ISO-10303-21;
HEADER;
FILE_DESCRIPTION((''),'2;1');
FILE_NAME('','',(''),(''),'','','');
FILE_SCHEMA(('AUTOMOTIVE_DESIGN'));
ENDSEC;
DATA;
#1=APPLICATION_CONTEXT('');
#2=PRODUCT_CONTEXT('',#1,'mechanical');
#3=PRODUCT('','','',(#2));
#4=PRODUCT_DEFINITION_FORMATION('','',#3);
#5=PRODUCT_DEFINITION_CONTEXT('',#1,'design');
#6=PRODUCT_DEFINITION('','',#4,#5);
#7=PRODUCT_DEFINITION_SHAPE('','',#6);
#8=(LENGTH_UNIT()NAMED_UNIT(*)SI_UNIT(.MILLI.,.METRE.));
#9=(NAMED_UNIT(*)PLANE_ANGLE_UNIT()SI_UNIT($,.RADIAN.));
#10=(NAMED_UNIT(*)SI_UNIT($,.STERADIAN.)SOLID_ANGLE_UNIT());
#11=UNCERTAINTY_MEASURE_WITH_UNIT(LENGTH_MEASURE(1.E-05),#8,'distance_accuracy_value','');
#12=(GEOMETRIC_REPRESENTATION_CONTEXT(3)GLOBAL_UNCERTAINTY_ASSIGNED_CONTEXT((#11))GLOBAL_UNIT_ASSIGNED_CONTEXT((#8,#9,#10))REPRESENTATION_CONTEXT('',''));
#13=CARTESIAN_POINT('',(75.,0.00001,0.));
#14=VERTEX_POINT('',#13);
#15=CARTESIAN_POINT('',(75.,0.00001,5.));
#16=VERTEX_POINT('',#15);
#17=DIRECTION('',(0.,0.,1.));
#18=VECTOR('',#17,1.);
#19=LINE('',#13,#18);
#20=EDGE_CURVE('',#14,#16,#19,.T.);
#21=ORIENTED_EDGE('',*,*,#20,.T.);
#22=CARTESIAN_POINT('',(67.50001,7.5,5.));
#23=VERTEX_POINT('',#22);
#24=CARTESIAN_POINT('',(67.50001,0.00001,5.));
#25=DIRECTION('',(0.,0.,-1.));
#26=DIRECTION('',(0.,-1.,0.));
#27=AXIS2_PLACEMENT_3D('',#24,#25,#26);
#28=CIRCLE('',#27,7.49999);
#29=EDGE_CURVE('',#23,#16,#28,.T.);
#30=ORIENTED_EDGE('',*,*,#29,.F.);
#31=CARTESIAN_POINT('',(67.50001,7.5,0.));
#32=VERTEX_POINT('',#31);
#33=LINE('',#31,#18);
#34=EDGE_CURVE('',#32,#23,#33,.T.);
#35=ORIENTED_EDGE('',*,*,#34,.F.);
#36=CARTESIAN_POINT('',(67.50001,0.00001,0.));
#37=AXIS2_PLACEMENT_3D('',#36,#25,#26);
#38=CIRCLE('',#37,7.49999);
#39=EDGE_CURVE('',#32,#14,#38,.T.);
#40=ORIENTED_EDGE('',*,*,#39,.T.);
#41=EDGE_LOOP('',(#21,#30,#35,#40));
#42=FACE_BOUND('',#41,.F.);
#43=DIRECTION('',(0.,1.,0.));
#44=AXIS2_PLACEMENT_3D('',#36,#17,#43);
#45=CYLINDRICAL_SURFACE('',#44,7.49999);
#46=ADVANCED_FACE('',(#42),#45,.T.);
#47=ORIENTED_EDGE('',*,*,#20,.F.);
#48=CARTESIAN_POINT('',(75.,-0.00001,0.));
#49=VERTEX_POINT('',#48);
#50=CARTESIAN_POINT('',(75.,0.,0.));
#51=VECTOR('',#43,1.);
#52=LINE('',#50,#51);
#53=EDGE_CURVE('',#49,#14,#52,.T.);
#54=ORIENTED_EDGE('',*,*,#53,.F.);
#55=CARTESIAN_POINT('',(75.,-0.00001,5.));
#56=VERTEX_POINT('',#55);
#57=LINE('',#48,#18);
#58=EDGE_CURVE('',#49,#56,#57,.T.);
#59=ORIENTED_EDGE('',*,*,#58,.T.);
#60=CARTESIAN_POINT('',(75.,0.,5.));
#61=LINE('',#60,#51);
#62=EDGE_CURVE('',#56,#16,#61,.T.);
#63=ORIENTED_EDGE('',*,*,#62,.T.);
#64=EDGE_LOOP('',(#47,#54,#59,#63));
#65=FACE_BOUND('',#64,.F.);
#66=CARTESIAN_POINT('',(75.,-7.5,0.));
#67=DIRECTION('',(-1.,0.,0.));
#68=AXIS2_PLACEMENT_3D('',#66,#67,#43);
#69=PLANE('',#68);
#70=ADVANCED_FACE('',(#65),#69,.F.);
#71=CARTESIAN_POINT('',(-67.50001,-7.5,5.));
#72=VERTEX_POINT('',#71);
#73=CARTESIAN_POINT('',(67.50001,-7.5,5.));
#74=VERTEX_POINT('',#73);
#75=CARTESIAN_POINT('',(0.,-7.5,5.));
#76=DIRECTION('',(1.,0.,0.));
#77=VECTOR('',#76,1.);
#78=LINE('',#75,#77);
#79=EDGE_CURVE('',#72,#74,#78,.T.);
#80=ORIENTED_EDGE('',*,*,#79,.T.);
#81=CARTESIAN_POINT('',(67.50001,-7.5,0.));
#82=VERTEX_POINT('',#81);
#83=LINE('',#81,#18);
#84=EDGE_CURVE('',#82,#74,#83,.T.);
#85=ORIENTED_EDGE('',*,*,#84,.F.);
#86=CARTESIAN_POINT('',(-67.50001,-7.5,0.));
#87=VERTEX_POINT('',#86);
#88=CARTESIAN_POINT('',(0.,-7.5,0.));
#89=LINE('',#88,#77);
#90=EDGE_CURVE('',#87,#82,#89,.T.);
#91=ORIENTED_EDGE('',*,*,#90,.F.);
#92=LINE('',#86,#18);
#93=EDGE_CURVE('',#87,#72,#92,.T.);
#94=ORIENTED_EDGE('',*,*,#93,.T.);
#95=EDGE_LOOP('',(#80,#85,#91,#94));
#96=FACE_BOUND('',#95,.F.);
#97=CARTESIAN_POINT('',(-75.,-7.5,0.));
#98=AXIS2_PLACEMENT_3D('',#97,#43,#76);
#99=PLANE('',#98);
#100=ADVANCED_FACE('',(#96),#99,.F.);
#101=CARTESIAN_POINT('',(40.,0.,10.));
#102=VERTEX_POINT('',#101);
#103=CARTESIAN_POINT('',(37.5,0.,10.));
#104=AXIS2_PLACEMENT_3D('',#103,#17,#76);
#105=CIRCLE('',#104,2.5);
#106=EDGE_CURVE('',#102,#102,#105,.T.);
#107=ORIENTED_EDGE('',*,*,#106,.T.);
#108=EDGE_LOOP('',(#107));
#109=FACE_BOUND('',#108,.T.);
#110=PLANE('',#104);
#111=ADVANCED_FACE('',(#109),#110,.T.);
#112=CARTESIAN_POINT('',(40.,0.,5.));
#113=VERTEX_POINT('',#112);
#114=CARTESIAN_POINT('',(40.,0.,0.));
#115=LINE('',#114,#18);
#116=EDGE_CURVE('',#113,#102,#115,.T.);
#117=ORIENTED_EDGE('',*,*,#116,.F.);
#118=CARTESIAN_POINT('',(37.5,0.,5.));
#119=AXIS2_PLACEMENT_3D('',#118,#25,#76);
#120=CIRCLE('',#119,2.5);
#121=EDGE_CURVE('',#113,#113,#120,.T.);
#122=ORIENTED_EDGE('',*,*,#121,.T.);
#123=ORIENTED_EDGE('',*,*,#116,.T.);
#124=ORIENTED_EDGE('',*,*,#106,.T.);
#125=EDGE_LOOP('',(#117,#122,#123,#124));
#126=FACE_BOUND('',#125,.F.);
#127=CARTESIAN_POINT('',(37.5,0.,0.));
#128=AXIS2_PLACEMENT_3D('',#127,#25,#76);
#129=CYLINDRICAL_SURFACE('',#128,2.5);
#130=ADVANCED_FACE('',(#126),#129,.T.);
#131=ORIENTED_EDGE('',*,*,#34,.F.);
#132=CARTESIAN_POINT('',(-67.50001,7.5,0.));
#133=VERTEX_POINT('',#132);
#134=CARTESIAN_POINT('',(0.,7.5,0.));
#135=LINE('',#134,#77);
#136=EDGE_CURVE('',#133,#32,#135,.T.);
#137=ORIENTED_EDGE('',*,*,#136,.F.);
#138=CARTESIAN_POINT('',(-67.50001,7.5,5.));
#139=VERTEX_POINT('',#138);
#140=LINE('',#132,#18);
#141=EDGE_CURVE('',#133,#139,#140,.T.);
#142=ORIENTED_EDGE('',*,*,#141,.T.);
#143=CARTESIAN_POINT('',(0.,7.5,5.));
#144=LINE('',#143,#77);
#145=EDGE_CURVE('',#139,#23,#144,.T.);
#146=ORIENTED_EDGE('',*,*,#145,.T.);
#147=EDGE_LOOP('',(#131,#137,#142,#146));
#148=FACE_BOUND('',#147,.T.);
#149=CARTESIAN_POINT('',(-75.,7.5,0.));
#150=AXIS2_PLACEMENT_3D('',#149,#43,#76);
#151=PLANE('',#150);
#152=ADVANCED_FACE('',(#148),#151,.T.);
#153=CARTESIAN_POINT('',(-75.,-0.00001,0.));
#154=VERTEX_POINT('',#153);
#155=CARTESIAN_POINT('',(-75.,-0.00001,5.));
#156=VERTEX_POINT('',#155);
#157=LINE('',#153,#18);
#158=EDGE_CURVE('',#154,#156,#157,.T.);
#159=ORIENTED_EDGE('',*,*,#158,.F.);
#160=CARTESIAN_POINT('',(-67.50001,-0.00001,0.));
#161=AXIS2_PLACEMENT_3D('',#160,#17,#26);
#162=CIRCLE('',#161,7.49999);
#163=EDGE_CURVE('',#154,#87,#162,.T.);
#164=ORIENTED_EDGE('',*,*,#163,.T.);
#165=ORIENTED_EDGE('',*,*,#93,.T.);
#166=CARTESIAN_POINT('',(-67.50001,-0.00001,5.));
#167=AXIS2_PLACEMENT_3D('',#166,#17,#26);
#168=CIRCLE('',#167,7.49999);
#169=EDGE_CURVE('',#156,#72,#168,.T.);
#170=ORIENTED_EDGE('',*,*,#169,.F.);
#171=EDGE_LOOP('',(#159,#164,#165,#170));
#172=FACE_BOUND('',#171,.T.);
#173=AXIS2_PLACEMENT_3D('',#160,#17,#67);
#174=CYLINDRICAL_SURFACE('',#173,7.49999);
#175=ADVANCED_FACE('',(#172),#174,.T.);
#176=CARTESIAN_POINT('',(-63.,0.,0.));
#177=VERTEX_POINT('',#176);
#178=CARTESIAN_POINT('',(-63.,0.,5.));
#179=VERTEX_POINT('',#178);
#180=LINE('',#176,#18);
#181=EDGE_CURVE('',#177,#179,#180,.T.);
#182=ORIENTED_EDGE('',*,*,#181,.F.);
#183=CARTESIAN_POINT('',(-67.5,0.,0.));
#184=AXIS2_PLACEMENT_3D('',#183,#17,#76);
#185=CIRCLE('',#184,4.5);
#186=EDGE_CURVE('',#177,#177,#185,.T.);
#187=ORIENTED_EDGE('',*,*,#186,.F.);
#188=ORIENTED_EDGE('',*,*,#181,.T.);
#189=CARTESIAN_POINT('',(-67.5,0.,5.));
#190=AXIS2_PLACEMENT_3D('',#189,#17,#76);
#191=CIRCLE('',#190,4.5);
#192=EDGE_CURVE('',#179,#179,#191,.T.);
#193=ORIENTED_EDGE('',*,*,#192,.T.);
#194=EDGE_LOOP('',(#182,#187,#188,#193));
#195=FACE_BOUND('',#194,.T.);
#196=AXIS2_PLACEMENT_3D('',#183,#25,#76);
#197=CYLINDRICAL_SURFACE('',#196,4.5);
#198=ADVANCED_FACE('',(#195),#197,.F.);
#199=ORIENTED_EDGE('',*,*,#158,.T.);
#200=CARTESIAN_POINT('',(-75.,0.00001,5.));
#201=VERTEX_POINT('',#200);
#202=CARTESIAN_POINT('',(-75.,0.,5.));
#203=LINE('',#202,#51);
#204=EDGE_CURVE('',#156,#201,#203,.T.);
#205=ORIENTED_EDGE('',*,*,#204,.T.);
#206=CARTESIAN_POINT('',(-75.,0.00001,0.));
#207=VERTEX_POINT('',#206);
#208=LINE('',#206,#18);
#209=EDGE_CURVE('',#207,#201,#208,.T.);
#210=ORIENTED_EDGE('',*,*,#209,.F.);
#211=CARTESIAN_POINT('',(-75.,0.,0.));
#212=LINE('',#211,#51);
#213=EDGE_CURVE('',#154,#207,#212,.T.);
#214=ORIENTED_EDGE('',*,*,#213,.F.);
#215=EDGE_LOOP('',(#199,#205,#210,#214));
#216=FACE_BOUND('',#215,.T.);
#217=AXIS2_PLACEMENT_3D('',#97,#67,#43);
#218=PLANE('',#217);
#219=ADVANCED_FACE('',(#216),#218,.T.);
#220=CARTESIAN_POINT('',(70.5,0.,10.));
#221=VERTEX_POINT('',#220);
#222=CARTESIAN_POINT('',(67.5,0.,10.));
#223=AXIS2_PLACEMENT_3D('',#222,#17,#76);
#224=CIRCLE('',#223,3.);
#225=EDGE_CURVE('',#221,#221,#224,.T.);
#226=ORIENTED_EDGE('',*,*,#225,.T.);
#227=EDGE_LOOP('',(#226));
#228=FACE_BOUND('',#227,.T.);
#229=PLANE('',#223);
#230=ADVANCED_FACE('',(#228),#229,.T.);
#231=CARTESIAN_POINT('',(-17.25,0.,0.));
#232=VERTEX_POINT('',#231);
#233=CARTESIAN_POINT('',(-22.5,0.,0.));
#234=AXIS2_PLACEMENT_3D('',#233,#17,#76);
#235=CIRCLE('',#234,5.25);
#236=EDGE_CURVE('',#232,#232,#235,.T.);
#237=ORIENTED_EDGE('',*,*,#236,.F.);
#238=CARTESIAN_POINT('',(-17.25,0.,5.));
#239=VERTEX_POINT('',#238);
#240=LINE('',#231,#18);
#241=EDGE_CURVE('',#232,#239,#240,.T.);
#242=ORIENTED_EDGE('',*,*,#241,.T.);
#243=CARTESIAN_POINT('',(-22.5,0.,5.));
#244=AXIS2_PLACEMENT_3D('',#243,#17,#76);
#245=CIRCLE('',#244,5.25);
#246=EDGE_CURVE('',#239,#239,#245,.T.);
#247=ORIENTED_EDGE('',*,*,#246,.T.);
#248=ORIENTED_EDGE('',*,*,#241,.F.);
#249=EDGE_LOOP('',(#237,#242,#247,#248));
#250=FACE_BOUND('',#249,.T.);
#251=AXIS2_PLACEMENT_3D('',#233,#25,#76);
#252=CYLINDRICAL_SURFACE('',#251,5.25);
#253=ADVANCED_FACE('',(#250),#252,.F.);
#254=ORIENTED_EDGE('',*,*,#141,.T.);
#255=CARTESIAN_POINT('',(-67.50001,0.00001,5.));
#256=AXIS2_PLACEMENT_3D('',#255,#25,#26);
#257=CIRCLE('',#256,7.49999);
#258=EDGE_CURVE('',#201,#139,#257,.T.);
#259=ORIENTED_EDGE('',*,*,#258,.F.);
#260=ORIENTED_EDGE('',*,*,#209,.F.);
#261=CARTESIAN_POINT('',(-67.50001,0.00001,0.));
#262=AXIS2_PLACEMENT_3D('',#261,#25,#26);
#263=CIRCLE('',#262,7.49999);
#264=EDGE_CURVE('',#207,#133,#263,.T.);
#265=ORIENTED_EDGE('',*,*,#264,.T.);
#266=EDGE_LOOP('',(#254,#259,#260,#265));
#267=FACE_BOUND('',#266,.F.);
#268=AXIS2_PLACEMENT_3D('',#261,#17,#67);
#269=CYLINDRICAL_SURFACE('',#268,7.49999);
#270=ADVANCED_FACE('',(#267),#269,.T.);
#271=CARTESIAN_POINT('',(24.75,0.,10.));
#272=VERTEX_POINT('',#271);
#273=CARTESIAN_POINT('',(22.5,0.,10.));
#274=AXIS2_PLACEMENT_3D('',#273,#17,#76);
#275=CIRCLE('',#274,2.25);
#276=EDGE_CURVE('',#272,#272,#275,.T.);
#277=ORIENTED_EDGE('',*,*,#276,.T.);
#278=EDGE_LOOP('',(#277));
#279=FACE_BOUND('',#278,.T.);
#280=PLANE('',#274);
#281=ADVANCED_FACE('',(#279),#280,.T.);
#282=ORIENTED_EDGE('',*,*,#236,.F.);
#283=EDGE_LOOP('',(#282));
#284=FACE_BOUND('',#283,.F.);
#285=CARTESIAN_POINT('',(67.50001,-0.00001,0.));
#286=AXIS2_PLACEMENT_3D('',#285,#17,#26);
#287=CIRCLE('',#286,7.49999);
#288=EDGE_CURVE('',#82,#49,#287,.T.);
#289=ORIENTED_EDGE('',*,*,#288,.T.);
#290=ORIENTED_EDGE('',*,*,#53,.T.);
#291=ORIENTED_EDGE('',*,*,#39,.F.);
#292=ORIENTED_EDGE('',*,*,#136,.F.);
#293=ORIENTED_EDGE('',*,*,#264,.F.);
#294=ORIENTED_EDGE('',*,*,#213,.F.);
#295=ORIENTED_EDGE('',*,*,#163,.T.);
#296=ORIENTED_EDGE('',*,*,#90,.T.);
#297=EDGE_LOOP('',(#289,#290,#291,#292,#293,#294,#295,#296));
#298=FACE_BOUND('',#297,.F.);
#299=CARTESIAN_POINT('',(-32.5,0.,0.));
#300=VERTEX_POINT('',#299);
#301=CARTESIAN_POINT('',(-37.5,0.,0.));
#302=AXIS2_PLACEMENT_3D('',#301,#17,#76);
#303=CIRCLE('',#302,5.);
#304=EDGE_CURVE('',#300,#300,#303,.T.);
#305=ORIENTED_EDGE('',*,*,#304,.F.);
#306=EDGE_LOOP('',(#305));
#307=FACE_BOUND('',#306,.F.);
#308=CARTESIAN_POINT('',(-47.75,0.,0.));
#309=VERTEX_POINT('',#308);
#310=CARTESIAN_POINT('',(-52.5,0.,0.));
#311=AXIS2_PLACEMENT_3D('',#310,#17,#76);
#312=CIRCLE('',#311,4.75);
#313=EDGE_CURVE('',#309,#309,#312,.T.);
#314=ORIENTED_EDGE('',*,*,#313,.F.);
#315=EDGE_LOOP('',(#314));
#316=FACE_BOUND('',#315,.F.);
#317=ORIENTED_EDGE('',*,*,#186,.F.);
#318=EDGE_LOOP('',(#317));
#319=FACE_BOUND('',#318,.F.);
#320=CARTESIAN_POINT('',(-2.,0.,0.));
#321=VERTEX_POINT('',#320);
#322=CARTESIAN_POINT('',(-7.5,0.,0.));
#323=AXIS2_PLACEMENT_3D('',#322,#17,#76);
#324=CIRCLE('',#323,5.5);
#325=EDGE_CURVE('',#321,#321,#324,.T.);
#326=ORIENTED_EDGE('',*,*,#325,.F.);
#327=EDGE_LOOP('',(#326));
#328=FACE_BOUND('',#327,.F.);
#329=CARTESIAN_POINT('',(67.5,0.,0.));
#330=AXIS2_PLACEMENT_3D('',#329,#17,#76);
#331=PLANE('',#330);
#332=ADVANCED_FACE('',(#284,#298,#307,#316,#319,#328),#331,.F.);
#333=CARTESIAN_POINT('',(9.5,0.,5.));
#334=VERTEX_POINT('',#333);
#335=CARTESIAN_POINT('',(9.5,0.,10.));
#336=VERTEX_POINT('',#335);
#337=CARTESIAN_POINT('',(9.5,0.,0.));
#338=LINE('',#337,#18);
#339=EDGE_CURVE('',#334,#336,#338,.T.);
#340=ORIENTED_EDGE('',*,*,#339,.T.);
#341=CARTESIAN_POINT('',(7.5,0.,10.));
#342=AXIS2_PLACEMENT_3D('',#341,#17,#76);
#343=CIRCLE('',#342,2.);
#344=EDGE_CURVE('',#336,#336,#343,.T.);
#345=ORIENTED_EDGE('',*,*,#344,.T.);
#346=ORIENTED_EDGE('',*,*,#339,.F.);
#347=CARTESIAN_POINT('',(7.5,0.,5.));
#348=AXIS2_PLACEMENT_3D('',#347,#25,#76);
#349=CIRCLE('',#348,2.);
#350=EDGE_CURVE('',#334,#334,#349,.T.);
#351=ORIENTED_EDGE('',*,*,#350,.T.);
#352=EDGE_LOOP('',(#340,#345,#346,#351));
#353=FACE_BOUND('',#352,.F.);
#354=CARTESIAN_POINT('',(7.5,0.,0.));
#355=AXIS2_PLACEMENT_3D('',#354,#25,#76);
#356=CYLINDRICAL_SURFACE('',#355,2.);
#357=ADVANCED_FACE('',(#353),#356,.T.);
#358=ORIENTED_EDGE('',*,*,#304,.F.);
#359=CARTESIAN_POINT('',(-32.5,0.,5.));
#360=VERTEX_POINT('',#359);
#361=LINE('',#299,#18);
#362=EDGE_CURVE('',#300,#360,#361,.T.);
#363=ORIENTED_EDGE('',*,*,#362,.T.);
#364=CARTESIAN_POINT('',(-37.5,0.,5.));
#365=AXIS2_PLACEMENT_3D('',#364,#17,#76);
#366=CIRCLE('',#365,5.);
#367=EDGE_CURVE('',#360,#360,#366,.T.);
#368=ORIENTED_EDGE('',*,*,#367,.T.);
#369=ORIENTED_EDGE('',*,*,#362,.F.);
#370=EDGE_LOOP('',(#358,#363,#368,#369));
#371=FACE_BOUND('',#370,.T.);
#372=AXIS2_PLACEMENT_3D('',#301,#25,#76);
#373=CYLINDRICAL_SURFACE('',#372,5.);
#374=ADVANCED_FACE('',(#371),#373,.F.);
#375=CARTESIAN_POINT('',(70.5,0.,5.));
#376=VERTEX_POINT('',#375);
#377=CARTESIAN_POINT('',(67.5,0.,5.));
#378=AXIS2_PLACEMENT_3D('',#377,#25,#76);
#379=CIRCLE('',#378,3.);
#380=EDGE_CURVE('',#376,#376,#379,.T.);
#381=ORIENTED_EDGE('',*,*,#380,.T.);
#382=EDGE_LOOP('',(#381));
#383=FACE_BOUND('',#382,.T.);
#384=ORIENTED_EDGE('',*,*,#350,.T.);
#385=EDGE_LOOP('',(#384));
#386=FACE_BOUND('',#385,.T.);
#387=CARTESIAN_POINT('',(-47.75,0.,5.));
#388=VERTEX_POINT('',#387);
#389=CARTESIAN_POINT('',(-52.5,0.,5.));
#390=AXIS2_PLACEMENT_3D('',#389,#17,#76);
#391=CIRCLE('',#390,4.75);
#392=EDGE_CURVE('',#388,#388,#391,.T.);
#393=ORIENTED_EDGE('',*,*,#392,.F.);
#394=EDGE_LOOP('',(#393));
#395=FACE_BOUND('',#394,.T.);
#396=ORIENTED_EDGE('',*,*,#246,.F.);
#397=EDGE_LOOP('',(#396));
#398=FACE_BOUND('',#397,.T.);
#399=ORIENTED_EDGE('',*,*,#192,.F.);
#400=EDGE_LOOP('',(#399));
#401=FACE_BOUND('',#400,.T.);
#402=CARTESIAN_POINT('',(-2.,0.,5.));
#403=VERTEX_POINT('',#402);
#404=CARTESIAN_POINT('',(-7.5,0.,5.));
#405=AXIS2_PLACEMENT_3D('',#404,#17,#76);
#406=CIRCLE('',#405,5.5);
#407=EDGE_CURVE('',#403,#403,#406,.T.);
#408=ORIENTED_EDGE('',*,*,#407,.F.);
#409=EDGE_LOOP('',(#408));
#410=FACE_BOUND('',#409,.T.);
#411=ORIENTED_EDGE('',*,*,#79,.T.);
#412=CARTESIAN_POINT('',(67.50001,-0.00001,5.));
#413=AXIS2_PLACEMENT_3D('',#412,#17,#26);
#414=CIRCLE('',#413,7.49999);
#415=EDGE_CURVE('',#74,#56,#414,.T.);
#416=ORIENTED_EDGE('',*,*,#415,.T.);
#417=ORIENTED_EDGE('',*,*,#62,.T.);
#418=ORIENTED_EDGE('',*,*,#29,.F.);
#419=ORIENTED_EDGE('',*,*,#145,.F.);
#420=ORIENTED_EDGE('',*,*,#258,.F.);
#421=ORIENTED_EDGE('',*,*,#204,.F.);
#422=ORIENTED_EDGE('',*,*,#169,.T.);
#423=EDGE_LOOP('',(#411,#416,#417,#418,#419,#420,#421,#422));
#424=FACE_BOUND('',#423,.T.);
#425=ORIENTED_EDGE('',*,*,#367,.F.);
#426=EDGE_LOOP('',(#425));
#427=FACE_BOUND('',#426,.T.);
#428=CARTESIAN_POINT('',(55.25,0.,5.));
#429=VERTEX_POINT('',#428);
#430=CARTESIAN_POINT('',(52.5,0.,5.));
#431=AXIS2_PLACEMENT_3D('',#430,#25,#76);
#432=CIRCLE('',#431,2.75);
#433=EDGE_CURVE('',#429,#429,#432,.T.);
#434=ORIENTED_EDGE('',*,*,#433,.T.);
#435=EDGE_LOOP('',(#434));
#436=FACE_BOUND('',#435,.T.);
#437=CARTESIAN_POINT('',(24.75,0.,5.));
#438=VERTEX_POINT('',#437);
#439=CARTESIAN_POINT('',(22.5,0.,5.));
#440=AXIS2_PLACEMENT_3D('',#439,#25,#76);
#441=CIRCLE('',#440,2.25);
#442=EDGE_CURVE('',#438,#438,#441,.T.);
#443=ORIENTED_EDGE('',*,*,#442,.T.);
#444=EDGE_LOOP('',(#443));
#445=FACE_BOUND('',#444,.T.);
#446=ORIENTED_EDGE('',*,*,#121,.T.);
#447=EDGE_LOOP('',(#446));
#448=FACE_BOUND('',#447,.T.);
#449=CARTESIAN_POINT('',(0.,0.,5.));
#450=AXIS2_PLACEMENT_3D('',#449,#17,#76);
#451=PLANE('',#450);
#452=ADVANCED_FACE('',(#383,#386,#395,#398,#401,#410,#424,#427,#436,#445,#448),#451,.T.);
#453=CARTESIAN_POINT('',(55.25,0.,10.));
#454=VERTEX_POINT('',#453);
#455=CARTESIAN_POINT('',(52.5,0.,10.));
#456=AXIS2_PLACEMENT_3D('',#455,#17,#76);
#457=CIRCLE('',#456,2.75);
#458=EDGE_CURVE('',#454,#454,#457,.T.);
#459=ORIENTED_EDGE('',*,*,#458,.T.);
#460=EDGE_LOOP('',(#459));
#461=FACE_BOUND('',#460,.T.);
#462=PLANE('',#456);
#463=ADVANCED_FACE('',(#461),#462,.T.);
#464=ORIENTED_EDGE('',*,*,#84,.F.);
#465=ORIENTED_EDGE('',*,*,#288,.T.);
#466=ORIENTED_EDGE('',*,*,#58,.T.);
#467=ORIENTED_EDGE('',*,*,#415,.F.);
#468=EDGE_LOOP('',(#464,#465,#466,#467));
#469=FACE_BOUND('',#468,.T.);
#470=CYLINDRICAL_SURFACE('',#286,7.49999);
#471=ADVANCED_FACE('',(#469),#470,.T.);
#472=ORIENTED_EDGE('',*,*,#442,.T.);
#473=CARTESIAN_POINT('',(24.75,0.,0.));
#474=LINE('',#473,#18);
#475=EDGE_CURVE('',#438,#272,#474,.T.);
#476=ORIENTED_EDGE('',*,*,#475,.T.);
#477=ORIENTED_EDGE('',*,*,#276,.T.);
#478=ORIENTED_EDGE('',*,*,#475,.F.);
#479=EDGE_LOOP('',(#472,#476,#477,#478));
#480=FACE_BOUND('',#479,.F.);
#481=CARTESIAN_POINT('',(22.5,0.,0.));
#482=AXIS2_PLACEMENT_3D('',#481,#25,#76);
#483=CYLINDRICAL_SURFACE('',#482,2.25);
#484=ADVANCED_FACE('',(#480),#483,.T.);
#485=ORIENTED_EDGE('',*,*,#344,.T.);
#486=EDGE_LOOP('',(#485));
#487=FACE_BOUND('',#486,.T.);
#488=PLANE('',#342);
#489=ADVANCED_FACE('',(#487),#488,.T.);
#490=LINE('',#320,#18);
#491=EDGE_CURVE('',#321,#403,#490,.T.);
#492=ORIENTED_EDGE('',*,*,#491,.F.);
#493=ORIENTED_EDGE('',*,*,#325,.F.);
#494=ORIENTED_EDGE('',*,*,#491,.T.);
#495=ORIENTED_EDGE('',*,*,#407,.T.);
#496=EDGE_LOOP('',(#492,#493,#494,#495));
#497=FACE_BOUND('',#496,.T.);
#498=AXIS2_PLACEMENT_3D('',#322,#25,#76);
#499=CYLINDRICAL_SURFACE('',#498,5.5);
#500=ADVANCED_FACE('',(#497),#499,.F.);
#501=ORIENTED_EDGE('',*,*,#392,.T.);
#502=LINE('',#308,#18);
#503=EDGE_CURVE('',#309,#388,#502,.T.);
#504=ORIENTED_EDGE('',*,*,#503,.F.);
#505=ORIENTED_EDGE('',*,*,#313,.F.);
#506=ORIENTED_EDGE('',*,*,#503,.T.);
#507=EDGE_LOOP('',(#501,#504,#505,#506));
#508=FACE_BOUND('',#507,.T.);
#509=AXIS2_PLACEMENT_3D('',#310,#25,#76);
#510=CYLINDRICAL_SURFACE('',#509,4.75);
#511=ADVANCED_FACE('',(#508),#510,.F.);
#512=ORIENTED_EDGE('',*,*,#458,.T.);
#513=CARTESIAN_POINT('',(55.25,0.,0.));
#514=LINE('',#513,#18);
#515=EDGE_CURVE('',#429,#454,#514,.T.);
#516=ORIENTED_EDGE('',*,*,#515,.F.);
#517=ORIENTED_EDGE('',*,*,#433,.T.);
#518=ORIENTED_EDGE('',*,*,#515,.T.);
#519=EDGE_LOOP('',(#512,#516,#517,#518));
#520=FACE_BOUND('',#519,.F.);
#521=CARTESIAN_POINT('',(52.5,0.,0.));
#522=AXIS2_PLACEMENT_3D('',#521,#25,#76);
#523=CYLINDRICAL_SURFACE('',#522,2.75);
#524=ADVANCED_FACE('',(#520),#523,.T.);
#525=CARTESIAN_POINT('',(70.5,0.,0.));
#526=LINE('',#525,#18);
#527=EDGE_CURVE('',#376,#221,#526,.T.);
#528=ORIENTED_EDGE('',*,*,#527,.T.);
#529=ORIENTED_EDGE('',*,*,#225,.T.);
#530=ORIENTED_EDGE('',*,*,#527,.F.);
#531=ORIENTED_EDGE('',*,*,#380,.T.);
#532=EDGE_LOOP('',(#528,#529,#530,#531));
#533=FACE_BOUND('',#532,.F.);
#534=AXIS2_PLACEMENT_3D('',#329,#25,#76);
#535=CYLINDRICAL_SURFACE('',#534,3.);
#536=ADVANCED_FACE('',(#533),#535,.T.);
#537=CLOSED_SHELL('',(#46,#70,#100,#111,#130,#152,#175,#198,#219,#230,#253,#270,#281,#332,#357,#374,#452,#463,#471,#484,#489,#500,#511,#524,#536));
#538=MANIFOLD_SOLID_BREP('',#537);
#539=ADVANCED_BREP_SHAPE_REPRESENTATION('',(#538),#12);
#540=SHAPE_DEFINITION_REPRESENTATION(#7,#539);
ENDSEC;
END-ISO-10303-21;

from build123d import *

# Parameters (mm, degrees)
F0_W     = 150
F0_H     = 15
F0_R     = 4.5
F0_R_2   = 4.75
F0_R_3   = 5
F0_R_4   = 5.25
F0_R_5   = 5.5
F1_DEPTH = 5
F2_R     = 7.49999
F3_R     = 3
F3_R_2   = 2.5
F3_R_3   = 2.75
F3_R_4   = 2.25
F3_R_5   = 2
F4_DEPTH = 10


# Not quite as in the source:
# - a fillet or chamfer is up to 0.001 mm smaller than in the source, because OpenCascade refuses the exact size


with BuildPart() as f1:
    # F0 (on Top) → F1 (new body)
    with BuildSketch(Plane.XY):
        Rectangle(F0_W, F0_H)
        with Locations((-67.5, 0)):
            Circle(F0_R, mode=Mode.SUBTRACT)
        with Locations((-52.5, 0)):
            Circle(F0_R_2, mode=Mode.SUBTRACT)
        with Locations((-37.5, 0)):
            Circle(F0_R_3, mode=Mode.SUBTRACT)
        with Locations((-22.5, 0)):
            Circle(F0_R_4, mode=Mode.SUBTRACT)
        with Locations((-7.5, 0)):
            Circle(F0_R_5, mode=Mode.SUBTRACT)
    extrude(amount=F1_DEPTH)

    # F2 (radius 7.5 in the source; OpenCascade refuses exactly that, so slightly less here)
    f2_edges = [f1.edges().sort_by_distance(p)[0] for p in [
        (-75, -7.5, 2.5),
        (-75, 7.5, 2.5),
        (75, -7.5, 2.5),
        (75, 7.5, 2.5),
    ]]
    fillet(f2_edges, radius=F2_R)

    # F3 (on Top) → F4 (join)
    with BuildSketch(Plane.XY):
        with Locations((67.5, 0)):
            Circle(F3_R)
        with Locations((37.5, 0)):
            Circle(F3_R_2)
        with Locations((52.5, 0)):
            Circle(F3_R_3)
        with Locations((22.5, 0)):
            Circle(F3_R_4)
        with Locations((7.5, 0)):
            Circle(F3_R_5)
    extrude(amount=F4_DEPTH)


solid = f1.part
